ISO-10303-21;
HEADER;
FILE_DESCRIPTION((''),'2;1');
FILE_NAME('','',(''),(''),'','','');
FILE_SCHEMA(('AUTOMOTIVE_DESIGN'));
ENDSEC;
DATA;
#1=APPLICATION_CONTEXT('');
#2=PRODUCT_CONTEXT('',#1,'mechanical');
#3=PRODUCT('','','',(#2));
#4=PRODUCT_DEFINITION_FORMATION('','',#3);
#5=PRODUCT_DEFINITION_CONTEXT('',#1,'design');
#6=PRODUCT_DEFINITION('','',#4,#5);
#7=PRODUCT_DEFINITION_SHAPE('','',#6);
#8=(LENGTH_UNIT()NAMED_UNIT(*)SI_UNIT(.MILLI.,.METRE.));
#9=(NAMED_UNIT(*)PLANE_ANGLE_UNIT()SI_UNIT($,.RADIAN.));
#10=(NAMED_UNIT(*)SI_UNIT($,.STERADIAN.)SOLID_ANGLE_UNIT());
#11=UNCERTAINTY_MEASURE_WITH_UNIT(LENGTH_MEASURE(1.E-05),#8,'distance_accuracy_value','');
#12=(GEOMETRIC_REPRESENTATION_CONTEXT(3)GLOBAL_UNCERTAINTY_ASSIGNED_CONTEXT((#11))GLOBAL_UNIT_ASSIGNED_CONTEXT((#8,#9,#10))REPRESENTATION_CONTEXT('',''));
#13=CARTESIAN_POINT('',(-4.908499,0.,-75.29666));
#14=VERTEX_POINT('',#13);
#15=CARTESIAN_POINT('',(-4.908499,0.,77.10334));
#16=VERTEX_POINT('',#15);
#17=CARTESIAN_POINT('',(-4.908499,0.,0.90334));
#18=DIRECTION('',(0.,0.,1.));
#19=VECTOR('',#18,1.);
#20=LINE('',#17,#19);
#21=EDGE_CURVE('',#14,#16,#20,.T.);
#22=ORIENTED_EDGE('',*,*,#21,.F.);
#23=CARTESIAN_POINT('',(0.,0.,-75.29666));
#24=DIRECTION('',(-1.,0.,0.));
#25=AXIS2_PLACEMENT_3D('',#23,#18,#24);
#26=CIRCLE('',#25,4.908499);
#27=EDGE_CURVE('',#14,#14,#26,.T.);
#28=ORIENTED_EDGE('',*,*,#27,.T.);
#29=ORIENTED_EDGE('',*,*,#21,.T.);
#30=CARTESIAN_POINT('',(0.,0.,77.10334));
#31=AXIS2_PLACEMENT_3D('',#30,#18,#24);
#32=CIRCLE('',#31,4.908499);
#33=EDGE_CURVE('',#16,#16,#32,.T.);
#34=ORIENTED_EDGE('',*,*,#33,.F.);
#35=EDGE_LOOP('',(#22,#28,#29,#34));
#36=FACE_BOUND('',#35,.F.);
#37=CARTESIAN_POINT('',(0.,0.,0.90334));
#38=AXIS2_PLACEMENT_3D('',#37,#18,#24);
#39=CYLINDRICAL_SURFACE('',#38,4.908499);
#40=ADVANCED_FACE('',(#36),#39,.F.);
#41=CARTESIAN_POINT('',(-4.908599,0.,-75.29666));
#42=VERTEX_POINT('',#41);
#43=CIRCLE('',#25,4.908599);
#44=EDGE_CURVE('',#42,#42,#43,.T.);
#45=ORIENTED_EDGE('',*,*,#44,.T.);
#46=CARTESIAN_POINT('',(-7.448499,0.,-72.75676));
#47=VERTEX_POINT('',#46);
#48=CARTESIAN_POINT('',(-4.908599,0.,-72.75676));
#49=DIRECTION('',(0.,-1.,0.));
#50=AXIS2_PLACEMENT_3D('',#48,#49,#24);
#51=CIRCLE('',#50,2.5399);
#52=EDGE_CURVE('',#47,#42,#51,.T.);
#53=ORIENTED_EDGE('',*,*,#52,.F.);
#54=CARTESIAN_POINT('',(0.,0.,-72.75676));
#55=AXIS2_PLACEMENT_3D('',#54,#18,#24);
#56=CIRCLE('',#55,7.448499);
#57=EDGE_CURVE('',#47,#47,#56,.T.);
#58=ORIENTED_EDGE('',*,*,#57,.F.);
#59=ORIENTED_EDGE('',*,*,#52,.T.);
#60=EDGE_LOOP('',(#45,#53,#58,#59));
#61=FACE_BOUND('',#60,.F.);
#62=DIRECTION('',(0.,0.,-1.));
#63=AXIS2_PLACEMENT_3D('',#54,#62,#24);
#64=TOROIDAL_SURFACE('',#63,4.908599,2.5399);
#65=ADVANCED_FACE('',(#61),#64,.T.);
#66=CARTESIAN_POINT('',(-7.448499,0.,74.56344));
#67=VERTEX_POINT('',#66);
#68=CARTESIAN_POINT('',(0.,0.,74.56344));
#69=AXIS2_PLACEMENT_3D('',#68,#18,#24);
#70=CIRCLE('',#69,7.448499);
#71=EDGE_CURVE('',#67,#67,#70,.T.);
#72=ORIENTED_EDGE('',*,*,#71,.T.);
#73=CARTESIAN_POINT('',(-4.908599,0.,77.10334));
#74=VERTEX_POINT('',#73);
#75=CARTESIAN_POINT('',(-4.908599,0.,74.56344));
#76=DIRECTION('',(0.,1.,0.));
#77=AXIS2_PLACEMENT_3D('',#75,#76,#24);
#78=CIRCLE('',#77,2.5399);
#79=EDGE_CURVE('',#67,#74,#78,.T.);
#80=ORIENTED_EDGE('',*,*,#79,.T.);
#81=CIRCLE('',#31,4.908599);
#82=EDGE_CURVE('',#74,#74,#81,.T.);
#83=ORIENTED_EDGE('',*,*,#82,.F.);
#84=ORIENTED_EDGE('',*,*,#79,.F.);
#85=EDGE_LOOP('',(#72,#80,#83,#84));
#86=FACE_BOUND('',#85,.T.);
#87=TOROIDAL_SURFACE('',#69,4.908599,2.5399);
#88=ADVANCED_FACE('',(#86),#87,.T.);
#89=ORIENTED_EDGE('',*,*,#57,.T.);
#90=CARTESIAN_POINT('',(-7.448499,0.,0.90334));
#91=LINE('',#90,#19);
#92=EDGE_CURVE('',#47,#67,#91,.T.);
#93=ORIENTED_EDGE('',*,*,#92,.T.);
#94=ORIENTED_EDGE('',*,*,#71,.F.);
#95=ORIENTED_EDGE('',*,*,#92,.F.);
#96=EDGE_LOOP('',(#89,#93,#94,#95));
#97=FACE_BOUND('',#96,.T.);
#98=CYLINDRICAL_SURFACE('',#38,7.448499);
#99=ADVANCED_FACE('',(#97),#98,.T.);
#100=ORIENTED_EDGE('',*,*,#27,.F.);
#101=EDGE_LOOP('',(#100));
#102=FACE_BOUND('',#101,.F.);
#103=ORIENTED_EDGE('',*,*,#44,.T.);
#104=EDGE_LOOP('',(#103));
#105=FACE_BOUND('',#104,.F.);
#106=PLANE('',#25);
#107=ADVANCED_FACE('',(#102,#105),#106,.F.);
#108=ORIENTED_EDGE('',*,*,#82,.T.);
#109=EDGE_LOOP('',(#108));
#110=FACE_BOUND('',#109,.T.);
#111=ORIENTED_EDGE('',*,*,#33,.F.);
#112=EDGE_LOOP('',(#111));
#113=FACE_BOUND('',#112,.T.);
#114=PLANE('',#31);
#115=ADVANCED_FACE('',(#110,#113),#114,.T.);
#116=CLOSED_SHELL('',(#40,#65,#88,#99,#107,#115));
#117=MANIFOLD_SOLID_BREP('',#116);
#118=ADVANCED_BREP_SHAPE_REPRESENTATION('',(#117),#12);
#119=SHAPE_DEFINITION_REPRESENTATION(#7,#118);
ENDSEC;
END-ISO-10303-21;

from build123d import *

# Parameters (mm, degrees)
F0_W    = 2.54
F0_H    = 152.4
F2_F1_R = 2.5399
F2_F2_R = 2.5399


# Not quite as in the source:
# - a fillet or chamfer is up to 0.001 mm smaller than in the source, because OpenCascade refuses the exact size


with BuildPart() as f1:
    # F0 (on Front) → F1 (revolve)
    with BuildSketch(Plane.XZ):
        with Locations((-6.1784988933, 0.9033400565)):
            Rectangle(F0_W, F0_H)
    revolve(axis=Axis((0, 0, -1.1060908437), (0, 0, 1)))

    # F2: fillet of radius 2.54 on 2 edges, made by hand

    # F2_f1 (radius 2.54 in the source; OpenCascade refuses exactly that, so slightly less here)
    f2_f1_edges = [f1.edges().sort_by_distance(p)[0] for p in [
        (7.4484988933, 0, 77.1033400565),
    ]]
    fillet(f2_f1_edges, radius=F2_F1_R)

    # F2_f2 (radius 2.54 in the source; OpenCascade refuses exactly that, so slightly less here)
    f2_f2_edges = [f1.edges().sort_by_distance(p)[0] for p in [
        (7.4484988933, 0, -75.2966599435),
    ]]
    fillet(f2_f2_edges, radius=F2_F2_R)


solid = f1.part
